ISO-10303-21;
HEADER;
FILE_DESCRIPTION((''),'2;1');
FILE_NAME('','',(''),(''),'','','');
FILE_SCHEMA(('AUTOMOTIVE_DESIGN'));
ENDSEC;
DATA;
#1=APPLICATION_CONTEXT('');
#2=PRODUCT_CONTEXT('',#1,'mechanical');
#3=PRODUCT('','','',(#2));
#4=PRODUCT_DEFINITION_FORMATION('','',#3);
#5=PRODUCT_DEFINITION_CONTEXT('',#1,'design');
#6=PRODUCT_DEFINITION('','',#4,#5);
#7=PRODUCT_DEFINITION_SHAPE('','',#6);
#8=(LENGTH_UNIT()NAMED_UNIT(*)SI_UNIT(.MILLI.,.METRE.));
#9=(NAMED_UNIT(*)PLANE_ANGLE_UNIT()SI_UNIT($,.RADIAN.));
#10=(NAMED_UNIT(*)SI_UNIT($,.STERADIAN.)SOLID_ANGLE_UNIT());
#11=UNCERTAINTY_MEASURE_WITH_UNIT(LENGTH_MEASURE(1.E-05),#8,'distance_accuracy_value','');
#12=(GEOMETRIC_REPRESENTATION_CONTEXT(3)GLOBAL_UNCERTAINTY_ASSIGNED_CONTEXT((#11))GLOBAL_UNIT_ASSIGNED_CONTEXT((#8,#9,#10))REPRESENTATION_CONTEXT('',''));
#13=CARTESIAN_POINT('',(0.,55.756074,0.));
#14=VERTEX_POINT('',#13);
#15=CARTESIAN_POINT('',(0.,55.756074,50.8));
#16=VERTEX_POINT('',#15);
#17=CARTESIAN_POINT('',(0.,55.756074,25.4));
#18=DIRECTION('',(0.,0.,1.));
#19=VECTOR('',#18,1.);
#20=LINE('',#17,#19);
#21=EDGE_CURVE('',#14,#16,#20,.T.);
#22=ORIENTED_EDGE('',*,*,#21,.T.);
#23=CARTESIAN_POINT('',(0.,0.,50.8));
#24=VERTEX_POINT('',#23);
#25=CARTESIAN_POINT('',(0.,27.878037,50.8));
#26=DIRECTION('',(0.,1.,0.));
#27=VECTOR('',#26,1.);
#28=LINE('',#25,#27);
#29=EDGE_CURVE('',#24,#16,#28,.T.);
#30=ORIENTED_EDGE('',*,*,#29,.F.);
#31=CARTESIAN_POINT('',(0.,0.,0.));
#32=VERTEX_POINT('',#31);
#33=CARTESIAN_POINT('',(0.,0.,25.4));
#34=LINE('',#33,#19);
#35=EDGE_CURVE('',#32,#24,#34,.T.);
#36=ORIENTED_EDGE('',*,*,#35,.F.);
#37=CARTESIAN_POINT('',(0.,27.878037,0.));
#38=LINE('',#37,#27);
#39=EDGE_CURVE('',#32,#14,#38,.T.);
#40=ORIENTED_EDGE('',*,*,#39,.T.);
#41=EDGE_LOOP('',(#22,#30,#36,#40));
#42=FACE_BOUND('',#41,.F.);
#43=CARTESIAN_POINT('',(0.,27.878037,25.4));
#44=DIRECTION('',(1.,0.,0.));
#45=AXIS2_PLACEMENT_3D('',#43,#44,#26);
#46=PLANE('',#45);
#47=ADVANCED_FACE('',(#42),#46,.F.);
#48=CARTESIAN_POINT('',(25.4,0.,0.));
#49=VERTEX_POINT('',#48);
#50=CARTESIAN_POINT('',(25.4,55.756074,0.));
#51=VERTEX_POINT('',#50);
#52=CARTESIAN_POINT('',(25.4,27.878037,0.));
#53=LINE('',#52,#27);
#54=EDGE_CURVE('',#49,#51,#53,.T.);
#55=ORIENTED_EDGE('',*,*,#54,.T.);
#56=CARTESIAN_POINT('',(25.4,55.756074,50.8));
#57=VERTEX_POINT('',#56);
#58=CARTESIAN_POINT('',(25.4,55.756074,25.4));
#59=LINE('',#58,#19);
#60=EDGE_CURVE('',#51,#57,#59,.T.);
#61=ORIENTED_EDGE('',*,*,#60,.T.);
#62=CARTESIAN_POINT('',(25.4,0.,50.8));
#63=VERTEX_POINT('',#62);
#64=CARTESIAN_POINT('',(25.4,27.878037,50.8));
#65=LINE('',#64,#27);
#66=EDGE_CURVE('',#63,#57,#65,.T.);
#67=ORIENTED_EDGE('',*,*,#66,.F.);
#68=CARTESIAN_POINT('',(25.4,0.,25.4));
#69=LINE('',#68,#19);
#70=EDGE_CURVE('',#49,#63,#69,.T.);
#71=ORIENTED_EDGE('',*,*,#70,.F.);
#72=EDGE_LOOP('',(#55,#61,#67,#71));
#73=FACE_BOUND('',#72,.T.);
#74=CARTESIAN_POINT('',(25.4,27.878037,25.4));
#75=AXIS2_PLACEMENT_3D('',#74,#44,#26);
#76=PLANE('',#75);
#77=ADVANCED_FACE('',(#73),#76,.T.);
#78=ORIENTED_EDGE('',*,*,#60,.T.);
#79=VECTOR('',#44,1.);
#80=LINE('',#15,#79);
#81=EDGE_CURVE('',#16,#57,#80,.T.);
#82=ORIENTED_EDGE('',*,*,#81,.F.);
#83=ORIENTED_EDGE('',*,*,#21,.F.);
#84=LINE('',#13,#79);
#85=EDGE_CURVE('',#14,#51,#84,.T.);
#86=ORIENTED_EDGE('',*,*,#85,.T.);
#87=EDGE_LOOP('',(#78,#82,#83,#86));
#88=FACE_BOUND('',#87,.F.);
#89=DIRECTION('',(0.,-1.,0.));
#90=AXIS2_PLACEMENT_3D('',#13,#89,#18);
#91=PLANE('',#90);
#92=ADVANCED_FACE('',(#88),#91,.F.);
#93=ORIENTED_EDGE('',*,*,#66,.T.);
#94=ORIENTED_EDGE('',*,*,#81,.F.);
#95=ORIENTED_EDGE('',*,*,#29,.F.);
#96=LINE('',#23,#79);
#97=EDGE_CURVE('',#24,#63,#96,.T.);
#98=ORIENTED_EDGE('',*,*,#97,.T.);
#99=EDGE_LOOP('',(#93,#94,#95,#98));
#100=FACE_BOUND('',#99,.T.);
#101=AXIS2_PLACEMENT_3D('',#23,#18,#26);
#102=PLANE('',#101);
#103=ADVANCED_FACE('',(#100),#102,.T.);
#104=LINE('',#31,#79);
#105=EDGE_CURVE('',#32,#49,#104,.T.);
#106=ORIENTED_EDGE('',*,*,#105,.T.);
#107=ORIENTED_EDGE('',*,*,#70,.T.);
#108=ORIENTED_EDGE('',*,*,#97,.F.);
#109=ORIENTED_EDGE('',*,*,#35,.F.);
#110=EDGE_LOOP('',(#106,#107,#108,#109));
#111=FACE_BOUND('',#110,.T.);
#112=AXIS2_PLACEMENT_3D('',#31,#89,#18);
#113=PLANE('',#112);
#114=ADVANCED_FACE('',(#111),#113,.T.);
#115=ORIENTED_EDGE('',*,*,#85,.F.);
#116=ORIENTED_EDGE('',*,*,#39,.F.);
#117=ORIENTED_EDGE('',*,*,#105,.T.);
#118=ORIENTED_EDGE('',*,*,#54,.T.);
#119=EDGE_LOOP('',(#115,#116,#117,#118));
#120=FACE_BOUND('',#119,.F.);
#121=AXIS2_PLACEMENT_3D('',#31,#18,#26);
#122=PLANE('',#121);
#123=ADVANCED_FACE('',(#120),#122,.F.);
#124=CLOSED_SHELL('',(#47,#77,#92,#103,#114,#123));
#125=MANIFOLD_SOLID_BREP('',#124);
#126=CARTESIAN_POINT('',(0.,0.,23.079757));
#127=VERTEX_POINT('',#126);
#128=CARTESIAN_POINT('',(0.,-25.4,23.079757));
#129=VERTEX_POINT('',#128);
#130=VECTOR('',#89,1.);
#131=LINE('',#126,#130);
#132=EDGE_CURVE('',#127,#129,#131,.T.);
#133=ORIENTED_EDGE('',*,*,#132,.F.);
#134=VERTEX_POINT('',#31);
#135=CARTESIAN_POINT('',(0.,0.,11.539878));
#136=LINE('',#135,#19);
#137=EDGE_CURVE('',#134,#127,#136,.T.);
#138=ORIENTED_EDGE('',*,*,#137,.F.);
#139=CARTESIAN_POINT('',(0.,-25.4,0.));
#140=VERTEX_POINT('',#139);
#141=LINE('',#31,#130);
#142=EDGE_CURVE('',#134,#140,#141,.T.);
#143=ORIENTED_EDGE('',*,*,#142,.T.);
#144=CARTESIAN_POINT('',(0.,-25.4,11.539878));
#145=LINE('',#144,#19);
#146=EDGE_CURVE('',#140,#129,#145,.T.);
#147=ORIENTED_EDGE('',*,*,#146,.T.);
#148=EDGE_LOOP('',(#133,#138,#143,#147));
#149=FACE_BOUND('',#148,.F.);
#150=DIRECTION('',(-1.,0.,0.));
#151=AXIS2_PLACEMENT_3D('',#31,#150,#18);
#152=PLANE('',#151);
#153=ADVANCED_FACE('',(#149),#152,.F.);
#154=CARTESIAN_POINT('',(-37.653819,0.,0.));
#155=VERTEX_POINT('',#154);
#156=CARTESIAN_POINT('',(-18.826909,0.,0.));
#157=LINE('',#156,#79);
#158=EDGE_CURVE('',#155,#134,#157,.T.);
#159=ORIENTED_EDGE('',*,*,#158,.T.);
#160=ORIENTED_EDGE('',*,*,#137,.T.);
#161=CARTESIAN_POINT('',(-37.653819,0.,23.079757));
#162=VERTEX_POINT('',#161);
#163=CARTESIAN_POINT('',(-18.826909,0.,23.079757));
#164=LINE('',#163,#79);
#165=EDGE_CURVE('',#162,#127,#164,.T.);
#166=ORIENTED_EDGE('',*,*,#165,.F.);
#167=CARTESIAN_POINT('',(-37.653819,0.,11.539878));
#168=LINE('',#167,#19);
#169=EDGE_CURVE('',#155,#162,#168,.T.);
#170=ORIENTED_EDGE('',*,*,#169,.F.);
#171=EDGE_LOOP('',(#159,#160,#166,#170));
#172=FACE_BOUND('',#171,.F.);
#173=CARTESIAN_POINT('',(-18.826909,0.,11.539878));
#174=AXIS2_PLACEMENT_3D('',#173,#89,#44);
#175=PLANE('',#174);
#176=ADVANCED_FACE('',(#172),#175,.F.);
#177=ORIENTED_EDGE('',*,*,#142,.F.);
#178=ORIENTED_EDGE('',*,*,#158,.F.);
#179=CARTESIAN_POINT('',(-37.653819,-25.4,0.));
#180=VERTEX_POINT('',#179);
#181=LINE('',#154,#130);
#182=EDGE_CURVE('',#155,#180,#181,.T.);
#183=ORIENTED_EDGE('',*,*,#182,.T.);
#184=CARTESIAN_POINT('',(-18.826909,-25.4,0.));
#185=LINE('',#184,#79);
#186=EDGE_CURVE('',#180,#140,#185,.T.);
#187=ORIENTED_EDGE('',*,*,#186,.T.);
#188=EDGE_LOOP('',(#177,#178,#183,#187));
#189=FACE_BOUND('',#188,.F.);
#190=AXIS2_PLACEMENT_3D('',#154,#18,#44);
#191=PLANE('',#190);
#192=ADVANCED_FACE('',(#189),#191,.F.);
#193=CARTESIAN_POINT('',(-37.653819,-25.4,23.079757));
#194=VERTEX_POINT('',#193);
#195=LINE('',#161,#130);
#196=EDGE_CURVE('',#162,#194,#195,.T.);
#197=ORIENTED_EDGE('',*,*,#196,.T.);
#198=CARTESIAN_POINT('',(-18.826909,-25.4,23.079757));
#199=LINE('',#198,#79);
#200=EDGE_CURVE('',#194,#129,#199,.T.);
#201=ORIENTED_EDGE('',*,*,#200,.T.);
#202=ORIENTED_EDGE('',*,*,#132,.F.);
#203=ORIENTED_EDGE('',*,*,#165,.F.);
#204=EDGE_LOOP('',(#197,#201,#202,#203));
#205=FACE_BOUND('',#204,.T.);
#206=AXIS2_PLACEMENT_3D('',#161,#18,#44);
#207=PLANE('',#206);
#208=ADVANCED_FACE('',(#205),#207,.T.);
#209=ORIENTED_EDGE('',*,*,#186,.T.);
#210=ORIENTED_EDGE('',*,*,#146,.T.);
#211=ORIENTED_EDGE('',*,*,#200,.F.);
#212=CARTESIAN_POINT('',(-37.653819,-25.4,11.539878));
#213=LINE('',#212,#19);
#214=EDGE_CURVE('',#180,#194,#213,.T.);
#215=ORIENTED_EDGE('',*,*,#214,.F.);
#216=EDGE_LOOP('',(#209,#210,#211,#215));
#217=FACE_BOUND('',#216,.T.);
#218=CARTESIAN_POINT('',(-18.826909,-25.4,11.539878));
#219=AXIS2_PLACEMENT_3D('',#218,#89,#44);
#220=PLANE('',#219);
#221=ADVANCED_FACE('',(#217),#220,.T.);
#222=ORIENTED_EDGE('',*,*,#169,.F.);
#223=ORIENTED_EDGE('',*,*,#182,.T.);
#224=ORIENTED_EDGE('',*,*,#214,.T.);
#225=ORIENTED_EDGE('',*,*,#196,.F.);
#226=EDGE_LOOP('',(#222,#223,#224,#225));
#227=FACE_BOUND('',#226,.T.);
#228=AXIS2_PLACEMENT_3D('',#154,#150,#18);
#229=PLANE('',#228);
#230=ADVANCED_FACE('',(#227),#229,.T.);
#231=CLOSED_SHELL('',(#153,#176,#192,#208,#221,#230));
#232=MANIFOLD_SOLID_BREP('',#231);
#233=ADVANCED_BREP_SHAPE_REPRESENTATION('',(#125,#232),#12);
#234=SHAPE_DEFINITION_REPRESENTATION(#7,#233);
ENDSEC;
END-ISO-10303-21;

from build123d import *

# Parameters (mm, degrees)
F0_W     = 55.7560741802
F0_H     = 50.8
F1_DEPTH = 25.4
F2_W     = 37.6538187265
F2_H     = 23.0797566473
F3_DEPTH = 25.4


# Not quite as in the source:
# - ends of sketch curves that miss each other by under 0.0002 mm in the source are joined


with BuildPart() as f1:
    # F0 (on Right) → F1 (new body)
    with BuildSketch(Plane.YZ):
        with Locations((27.8780370901, 25.4)):
            Rectangle(F0_W, F0_H)
    extrude(amount=F1_DEPTH)


with BuildPart() as f3:
    # F2 (on face) → F3 (new body)
    with BuildSketch(Plane.XZ):
        with Locations((-18.8269093633, 11.5398783237)):
            Rectangle(F2_W, F2_H)
    extrude(amount=F3_DEPTH)


solid = Compound([f1.part, f3.part])
